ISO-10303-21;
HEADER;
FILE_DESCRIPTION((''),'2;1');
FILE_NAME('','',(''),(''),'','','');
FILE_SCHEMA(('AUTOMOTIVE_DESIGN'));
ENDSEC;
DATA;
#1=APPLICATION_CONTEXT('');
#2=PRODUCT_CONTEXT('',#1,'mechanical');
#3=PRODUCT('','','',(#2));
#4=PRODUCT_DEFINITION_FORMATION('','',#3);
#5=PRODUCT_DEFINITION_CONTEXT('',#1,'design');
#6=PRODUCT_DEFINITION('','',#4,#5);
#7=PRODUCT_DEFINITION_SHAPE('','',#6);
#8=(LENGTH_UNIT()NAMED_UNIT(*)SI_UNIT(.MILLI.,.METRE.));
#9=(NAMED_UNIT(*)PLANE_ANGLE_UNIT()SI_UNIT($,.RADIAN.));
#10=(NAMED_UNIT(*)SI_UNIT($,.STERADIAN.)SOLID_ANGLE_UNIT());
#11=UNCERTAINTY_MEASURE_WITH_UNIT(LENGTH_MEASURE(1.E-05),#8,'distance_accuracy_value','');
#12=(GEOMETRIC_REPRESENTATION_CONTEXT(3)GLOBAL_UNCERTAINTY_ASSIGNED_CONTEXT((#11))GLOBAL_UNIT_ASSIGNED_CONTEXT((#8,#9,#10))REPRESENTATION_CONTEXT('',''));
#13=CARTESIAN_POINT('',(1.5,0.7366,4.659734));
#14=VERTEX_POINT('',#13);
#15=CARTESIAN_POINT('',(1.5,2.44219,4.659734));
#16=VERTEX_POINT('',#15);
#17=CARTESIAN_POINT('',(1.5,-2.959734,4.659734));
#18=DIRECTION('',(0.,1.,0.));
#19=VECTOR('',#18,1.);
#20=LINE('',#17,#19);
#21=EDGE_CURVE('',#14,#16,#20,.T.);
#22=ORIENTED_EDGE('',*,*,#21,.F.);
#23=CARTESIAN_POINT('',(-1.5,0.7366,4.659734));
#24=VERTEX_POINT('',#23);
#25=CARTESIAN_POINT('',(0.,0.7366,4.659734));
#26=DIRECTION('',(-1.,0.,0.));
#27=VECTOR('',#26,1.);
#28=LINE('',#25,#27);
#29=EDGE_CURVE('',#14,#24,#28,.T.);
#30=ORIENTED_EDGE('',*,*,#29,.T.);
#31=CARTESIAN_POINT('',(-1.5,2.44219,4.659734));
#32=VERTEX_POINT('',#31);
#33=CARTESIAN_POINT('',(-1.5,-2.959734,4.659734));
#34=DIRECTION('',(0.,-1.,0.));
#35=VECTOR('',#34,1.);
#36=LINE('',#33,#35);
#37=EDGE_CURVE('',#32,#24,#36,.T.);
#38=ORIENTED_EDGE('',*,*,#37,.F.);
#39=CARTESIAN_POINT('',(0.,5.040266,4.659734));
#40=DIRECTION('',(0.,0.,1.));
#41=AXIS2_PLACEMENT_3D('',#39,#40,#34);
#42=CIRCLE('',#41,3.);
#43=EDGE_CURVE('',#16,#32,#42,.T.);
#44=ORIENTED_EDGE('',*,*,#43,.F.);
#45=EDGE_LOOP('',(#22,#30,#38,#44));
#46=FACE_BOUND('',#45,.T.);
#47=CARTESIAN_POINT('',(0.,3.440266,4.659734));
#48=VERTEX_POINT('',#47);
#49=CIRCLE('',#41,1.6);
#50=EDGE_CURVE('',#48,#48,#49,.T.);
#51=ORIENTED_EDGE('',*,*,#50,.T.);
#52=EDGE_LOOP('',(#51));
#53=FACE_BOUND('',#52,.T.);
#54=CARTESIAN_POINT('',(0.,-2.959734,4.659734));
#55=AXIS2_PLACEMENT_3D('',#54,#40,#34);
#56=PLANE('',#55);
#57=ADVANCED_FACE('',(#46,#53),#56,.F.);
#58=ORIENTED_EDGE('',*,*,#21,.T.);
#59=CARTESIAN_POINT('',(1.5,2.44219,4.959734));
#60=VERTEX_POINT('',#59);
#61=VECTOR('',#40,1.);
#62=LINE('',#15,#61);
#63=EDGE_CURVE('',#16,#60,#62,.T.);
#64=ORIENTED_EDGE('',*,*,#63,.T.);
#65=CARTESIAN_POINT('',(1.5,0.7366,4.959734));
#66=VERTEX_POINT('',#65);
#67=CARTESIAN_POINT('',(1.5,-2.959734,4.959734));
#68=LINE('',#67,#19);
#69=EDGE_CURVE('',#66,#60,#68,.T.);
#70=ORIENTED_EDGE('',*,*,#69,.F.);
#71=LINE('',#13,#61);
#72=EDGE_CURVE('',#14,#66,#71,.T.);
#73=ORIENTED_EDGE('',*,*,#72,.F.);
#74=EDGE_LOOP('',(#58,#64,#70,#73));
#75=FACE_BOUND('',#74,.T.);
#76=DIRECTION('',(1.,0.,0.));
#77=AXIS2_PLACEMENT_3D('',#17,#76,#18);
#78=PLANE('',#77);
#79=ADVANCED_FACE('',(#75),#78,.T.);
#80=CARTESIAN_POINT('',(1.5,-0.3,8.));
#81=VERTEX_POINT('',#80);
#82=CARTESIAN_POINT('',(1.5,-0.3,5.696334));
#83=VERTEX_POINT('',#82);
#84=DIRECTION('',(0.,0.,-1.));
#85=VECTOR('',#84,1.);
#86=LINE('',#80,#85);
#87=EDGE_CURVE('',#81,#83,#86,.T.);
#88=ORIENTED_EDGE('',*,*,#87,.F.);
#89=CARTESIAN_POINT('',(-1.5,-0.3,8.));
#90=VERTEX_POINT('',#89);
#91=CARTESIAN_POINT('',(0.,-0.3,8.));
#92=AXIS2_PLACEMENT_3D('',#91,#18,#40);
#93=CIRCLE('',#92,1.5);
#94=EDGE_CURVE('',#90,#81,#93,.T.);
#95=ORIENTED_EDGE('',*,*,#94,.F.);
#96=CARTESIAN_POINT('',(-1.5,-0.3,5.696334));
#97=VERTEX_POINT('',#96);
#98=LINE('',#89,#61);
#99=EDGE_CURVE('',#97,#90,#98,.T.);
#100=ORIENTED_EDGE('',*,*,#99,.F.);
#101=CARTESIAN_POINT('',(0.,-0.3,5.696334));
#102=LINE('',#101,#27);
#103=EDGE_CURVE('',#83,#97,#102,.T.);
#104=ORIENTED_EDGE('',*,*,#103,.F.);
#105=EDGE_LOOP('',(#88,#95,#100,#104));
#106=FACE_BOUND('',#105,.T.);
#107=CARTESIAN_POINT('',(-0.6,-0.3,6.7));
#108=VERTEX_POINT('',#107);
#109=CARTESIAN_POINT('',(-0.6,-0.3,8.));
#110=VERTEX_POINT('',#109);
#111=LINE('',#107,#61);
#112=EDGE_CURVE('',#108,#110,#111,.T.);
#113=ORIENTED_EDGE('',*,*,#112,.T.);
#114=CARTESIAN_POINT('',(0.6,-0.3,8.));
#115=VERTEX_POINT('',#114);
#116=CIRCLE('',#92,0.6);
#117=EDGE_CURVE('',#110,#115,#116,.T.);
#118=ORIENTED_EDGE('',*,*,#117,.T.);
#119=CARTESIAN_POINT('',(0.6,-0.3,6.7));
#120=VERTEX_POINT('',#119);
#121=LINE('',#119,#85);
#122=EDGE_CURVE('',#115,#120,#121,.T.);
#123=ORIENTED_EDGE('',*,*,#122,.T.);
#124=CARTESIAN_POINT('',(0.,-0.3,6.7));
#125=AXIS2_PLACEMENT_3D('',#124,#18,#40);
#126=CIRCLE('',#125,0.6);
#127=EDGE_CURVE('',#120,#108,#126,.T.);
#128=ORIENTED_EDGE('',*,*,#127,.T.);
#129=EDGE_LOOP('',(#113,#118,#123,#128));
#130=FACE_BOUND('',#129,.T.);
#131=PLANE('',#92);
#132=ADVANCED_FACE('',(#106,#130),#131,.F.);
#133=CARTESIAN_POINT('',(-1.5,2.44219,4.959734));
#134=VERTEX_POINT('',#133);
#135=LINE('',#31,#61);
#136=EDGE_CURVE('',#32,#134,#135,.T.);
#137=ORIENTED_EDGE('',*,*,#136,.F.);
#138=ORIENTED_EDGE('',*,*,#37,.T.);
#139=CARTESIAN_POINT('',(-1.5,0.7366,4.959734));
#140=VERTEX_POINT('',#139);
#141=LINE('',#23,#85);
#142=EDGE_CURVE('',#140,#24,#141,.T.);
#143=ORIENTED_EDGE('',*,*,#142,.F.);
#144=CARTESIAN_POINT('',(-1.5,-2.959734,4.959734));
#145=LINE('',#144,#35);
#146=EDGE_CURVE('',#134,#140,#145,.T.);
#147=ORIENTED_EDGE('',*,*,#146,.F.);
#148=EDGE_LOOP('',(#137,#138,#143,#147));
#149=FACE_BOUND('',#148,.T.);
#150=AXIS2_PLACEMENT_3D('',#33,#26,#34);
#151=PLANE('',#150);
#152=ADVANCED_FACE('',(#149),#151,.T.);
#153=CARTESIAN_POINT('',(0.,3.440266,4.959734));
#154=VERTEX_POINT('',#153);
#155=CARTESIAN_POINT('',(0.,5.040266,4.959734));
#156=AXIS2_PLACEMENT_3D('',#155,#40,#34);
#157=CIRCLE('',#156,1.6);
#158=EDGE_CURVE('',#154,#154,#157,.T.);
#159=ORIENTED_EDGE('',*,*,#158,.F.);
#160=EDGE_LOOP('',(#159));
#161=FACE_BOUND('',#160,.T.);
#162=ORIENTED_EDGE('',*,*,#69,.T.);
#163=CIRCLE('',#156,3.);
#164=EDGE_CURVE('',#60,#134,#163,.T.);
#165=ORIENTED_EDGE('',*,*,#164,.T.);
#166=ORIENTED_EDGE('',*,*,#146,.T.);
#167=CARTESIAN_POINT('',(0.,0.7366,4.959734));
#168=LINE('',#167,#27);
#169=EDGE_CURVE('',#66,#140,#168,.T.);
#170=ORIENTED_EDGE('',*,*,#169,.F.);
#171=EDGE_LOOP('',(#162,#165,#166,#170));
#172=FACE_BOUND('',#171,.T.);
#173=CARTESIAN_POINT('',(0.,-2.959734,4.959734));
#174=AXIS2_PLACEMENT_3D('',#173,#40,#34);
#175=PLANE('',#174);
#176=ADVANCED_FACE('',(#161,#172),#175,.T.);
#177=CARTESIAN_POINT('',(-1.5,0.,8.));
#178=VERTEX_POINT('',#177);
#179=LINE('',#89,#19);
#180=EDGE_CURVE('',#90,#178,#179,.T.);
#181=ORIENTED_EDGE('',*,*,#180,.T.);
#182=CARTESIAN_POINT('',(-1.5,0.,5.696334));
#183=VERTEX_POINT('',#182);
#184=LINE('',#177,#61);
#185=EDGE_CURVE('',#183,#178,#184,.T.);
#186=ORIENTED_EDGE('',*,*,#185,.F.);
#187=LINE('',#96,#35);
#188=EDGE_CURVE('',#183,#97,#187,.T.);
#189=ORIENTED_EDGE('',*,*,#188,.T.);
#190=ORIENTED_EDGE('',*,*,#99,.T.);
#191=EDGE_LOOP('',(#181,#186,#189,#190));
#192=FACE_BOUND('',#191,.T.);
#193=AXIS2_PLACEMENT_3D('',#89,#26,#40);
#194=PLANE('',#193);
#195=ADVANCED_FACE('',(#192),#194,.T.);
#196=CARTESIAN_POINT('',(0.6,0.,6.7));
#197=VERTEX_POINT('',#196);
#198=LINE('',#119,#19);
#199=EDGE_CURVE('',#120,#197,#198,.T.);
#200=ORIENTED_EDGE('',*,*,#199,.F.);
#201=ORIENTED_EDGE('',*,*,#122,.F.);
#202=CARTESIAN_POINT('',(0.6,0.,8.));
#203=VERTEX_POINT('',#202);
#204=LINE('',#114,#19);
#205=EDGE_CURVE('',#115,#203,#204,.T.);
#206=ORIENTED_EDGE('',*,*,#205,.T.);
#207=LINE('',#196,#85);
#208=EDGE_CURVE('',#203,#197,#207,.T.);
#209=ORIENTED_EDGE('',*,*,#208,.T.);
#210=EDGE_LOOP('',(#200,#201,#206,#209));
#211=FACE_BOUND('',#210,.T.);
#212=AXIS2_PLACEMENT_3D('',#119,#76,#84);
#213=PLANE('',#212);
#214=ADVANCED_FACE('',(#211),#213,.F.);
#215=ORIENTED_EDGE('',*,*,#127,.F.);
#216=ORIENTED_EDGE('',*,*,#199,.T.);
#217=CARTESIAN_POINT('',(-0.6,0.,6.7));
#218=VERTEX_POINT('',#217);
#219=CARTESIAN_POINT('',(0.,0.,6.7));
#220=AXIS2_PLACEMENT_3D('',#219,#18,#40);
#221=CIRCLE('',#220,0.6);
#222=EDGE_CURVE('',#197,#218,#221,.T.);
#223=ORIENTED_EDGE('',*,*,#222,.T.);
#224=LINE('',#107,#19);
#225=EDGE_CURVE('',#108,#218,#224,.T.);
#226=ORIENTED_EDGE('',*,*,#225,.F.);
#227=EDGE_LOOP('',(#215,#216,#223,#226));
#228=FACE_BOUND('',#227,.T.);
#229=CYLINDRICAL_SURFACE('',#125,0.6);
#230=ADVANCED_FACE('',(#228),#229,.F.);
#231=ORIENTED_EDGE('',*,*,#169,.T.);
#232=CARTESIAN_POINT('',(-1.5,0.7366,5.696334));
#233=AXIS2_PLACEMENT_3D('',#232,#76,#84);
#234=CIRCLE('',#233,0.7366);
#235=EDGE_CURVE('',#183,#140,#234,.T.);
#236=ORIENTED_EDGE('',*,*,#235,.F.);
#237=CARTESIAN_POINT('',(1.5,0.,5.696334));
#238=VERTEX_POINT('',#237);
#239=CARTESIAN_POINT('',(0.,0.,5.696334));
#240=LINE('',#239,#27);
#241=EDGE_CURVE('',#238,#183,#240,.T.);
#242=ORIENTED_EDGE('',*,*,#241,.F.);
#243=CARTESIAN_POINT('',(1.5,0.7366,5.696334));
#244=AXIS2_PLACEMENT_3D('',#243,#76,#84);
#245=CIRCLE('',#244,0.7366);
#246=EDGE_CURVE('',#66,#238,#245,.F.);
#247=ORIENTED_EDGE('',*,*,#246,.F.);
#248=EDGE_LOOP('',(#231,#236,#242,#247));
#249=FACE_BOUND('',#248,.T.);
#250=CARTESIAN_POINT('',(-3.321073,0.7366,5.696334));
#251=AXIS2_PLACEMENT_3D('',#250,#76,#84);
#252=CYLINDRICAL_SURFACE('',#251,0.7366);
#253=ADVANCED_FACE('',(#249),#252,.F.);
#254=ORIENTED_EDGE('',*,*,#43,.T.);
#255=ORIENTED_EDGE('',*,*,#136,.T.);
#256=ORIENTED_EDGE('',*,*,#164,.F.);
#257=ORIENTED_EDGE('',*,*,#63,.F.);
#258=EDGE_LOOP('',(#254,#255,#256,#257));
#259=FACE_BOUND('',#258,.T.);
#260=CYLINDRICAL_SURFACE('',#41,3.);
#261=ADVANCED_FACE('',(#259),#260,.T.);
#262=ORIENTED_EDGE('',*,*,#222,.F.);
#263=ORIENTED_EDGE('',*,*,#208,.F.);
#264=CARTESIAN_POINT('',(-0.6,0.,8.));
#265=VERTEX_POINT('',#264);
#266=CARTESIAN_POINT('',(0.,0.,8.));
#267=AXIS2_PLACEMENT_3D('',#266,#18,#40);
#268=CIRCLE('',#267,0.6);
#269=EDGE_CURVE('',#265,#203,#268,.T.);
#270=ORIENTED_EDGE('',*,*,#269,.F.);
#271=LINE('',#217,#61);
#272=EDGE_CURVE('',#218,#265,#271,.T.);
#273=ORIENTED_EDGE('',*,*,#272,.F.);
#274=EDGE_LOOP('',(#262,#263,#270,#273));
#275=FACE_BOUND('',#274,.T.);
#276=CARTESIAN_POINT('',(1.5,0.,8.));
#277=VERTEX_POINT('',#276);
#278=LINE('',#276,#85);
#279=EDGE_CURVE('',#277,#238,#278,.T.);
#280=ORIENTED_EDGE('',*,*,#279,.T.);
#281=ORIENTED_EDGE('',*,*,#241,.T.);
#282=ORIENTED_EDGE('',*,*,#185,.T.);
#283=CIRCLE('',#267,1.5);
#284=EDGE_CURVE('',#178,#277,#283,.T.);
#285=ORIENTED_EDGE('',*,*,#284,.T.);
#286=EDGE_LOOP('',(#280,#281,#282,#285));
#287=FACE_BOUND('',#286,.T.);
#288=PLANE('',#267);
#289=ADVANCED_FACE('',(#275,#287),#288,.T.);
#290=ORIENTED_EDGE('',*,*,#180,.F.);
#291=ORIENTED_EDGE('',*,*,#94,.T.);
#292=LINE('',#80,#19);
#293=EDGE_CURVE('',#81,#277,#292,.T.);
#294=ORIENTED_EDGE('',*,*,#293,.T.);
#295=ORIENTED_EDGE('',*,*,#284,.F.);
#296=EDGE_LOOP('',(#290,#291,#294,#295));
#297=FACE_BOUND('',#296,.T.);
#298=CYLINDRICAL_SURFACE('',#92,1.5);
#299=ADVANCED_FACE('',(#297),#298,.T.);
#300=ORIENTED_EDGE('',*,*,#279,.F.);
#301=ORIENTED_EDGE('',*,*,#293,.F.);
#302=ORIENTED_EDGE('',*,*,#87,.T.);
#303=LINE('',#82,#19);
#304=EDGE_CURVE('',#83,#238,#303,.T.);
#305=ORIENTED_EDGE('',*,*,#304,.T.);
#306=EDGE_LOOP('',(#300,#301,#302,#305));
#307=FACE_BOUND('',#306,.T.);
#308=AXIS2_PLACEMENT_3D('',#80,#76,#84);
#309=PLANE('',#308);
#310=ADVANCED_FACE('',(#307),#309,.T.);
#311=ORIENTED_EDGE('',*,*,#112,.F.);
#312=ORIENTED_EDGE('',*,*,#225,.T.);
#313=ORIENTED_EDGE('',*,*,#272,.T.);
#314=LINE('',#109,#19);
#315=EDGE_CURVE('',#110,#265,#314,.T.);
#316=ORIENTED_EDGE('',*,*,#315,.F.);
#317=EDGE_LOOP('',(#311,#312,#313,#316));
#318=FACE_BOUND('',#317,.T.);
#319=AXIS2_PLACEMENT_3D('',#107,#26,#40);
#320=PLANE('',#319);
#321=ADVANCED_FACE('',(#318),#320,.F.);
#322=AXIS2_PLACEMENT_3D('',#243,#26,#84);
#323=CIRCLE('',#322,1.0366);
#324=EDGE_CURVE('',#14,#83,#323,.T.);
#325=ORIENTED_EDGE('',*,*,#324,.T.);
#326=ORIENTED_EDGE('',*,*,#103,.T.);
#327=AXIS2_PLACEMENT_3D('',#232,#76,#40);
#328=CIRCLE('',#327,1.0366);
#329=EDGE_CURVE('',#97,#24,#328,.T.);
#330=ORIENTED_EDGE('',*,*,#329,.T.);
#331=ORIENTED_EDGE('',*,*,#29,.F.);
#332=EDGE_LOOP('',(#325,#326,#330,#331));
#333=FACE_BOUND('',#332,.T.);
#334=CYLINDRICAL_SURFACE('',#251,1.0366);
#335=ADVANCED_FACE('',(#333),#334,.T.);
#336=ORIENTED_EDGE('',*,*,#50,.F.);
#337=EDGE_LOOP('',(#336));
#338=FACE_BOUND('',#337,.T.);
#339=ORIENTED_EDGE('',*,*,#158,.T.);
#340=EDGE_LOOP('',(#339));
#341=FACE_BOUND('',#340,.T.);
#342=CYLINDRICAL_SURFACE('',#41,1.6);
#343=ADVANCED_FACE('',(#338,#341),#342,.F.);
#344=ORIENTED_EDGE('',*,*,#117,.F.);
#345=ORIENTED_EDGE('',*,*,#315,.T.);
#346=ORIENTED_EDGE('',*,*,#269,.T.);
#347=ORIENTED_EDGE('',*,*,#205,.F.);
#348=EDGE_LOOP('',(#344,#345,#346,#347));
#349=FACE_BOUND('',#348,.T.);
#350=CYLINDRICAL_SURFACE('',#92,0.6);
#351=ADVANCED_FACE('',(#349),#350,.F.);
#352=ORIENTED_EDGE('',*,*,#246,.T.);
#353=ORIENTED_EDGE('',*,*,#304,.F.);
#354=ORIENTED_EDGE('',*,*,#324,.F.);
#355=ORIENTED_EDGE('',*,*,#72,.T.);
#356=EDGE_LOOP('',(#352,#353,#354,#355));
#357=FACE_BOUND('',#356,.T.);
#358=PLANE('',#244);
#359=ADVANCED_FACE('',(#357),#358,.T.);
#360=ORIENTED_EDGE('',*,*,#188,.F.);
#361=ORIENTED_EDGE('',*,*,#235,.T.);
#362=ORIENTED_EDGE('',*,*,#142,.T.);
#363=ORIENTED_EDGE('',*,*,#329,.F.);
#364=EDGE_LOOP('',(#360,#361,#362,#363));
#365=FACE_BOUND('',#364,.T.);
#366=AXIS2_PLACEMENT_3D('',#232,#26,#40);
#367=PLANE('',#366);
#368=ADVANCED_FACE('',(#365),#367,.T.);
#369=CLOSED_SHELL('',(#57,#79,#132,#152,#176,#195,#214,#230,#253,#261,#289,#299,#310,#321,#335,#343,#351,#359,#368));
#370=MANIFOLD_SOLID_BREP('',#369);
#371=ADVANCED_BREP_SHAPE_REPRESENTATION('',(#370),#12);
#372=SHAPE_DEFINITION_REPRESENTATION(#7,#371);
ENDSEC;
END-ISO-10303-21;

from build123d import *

# Parameters (mm, degrees)
SKETCH_1_R             = 1.6
SM_BASE_FLANGE_1_DEPTH = 0.3
OTHER_START            = -4
OTHER_1_OUTLINE_W      = 3
OTHER_1_OUTLINE_H      = 0.3
OTHER_1_DEPTH          = 8.959734012
OTHER_START_2          = 4.659734012
OTHER_1_2_OUTLINE_R    = 1.6
OTHER_1_2_DEPTH        = 1.0366
OTHER_1_3_DEPTH        = 8


with BuildPart() as part:
    # 基体-法兰1: sheet metal written as solids
    # Sketch 1 → 基体-法兰1 (new body)
    with BuildSketch(Plane(origin=(0, 0, 0), x_dir=(1, 0, 0), z_dir=(0, 1, 0))):
        with BuildLine():
            Line((-1.5, -8), (-1.5, -2.598076211))
            ThreePointArc((-1.5, -2.598076211), (0, 3), (1.5, -2.598076211))
            Line((1.5, -2.598076211), (1.5, -8))
            ThreePointArc((1.5, -8), (0, -9.5), (-1.5, -8))
        make_face()
        with Locations(Location((0, 0, 0), (0, 0, 270))):
            Circle(SKETCH_1_R, mode=Mode.SUBTRACT)
        with BuildLine():
            Line((0.6, -6.7), (0.6, -8))
            ThreePointArc((0.6, -8), (0, -8.6), (-0.6, -8))
            Line((-0.6, -8), (-0.6, -6.7))
            ThreePointArc((-0.6, -6.7), (0, -6.1), (0.6, -6.7))
        make_face(mode=Mode.SUBTRACT)
    extrude(amount=-SM_BASE_FLANGE_1_DEPTH)

    # Other 1: read off the stored shape, not the designer's step
    # Other 1 outline → Other 1 (cut)
    with BuildSketch(Plane.XY.offset(OTHER_START)):
        with Locations((0, -0.15)):
            Rectangle(OTHER_1_OUTLINE_W, OTHER_1_OUTLINE_H)
    extrude(amount=OTHER_1_DEPTH, mode=Mode.SUBTRACT)

    # Other 1 2 outline → Other 1 2 (add)
    with BuildSketch(Plane.XY.offset(OTHER_START_2)):
        with BuildLine():
            ThreePointArc((1.5, 2.442189777), (0, 8.040265988), (-1.5, 2.442189777))
            Line((-1.5, 2.442189777), (-1.5, 0))
            Line((-1.5, 0), (1.5, 0))
            Line((1.5, 0), (1.5, 2.442189777))
        make_face()
        with Locations((0, 5.040265988)):
            Circle(OTHER_1_2_OUTLINE_R, mode=Mode.SUBTRACT)
    extrude(amount=OTHER_1_2_DEPTH)

    # Other 1 3 outline → Other 1 3 (cut)
    with BuildSketch(Plane.YZ.offset(OTHER_START)):
        with BuildLine():
            Line((0.7366, 4.959734012), (10, 4.959734012))
            Line((10, 4.959734012), (10, 5.696334012))
            Line((10, 5.696334012), (0, 5.696334012))
            ThreePointArc((0, 5.696334012), (0.215745145, 5.175479157), (0.7366, 4.959734012))
        make_face()
        with BuildLine():
            Line((10, -4), (10, 4.659734016))
            Line((10, 4.659734016), (0.7366, 4.659734012))
            ThreePointArc((0.7366, 4.659734012), (0.00361311, 4.963347123), (-0.3, 5.696334012))
            Line((-0.3, 5.696334012), (-0.3, 7))
            Line((-0.3, 7), (-2, 7))
            Line((-2, 7), (-2, -4))
            Line((-2, -4), (10, -4))
        make_face()
    extrude(amount=OTHER_1_3_DEPTH, mode=Mode.SUBTRACT)


solid = part.part
